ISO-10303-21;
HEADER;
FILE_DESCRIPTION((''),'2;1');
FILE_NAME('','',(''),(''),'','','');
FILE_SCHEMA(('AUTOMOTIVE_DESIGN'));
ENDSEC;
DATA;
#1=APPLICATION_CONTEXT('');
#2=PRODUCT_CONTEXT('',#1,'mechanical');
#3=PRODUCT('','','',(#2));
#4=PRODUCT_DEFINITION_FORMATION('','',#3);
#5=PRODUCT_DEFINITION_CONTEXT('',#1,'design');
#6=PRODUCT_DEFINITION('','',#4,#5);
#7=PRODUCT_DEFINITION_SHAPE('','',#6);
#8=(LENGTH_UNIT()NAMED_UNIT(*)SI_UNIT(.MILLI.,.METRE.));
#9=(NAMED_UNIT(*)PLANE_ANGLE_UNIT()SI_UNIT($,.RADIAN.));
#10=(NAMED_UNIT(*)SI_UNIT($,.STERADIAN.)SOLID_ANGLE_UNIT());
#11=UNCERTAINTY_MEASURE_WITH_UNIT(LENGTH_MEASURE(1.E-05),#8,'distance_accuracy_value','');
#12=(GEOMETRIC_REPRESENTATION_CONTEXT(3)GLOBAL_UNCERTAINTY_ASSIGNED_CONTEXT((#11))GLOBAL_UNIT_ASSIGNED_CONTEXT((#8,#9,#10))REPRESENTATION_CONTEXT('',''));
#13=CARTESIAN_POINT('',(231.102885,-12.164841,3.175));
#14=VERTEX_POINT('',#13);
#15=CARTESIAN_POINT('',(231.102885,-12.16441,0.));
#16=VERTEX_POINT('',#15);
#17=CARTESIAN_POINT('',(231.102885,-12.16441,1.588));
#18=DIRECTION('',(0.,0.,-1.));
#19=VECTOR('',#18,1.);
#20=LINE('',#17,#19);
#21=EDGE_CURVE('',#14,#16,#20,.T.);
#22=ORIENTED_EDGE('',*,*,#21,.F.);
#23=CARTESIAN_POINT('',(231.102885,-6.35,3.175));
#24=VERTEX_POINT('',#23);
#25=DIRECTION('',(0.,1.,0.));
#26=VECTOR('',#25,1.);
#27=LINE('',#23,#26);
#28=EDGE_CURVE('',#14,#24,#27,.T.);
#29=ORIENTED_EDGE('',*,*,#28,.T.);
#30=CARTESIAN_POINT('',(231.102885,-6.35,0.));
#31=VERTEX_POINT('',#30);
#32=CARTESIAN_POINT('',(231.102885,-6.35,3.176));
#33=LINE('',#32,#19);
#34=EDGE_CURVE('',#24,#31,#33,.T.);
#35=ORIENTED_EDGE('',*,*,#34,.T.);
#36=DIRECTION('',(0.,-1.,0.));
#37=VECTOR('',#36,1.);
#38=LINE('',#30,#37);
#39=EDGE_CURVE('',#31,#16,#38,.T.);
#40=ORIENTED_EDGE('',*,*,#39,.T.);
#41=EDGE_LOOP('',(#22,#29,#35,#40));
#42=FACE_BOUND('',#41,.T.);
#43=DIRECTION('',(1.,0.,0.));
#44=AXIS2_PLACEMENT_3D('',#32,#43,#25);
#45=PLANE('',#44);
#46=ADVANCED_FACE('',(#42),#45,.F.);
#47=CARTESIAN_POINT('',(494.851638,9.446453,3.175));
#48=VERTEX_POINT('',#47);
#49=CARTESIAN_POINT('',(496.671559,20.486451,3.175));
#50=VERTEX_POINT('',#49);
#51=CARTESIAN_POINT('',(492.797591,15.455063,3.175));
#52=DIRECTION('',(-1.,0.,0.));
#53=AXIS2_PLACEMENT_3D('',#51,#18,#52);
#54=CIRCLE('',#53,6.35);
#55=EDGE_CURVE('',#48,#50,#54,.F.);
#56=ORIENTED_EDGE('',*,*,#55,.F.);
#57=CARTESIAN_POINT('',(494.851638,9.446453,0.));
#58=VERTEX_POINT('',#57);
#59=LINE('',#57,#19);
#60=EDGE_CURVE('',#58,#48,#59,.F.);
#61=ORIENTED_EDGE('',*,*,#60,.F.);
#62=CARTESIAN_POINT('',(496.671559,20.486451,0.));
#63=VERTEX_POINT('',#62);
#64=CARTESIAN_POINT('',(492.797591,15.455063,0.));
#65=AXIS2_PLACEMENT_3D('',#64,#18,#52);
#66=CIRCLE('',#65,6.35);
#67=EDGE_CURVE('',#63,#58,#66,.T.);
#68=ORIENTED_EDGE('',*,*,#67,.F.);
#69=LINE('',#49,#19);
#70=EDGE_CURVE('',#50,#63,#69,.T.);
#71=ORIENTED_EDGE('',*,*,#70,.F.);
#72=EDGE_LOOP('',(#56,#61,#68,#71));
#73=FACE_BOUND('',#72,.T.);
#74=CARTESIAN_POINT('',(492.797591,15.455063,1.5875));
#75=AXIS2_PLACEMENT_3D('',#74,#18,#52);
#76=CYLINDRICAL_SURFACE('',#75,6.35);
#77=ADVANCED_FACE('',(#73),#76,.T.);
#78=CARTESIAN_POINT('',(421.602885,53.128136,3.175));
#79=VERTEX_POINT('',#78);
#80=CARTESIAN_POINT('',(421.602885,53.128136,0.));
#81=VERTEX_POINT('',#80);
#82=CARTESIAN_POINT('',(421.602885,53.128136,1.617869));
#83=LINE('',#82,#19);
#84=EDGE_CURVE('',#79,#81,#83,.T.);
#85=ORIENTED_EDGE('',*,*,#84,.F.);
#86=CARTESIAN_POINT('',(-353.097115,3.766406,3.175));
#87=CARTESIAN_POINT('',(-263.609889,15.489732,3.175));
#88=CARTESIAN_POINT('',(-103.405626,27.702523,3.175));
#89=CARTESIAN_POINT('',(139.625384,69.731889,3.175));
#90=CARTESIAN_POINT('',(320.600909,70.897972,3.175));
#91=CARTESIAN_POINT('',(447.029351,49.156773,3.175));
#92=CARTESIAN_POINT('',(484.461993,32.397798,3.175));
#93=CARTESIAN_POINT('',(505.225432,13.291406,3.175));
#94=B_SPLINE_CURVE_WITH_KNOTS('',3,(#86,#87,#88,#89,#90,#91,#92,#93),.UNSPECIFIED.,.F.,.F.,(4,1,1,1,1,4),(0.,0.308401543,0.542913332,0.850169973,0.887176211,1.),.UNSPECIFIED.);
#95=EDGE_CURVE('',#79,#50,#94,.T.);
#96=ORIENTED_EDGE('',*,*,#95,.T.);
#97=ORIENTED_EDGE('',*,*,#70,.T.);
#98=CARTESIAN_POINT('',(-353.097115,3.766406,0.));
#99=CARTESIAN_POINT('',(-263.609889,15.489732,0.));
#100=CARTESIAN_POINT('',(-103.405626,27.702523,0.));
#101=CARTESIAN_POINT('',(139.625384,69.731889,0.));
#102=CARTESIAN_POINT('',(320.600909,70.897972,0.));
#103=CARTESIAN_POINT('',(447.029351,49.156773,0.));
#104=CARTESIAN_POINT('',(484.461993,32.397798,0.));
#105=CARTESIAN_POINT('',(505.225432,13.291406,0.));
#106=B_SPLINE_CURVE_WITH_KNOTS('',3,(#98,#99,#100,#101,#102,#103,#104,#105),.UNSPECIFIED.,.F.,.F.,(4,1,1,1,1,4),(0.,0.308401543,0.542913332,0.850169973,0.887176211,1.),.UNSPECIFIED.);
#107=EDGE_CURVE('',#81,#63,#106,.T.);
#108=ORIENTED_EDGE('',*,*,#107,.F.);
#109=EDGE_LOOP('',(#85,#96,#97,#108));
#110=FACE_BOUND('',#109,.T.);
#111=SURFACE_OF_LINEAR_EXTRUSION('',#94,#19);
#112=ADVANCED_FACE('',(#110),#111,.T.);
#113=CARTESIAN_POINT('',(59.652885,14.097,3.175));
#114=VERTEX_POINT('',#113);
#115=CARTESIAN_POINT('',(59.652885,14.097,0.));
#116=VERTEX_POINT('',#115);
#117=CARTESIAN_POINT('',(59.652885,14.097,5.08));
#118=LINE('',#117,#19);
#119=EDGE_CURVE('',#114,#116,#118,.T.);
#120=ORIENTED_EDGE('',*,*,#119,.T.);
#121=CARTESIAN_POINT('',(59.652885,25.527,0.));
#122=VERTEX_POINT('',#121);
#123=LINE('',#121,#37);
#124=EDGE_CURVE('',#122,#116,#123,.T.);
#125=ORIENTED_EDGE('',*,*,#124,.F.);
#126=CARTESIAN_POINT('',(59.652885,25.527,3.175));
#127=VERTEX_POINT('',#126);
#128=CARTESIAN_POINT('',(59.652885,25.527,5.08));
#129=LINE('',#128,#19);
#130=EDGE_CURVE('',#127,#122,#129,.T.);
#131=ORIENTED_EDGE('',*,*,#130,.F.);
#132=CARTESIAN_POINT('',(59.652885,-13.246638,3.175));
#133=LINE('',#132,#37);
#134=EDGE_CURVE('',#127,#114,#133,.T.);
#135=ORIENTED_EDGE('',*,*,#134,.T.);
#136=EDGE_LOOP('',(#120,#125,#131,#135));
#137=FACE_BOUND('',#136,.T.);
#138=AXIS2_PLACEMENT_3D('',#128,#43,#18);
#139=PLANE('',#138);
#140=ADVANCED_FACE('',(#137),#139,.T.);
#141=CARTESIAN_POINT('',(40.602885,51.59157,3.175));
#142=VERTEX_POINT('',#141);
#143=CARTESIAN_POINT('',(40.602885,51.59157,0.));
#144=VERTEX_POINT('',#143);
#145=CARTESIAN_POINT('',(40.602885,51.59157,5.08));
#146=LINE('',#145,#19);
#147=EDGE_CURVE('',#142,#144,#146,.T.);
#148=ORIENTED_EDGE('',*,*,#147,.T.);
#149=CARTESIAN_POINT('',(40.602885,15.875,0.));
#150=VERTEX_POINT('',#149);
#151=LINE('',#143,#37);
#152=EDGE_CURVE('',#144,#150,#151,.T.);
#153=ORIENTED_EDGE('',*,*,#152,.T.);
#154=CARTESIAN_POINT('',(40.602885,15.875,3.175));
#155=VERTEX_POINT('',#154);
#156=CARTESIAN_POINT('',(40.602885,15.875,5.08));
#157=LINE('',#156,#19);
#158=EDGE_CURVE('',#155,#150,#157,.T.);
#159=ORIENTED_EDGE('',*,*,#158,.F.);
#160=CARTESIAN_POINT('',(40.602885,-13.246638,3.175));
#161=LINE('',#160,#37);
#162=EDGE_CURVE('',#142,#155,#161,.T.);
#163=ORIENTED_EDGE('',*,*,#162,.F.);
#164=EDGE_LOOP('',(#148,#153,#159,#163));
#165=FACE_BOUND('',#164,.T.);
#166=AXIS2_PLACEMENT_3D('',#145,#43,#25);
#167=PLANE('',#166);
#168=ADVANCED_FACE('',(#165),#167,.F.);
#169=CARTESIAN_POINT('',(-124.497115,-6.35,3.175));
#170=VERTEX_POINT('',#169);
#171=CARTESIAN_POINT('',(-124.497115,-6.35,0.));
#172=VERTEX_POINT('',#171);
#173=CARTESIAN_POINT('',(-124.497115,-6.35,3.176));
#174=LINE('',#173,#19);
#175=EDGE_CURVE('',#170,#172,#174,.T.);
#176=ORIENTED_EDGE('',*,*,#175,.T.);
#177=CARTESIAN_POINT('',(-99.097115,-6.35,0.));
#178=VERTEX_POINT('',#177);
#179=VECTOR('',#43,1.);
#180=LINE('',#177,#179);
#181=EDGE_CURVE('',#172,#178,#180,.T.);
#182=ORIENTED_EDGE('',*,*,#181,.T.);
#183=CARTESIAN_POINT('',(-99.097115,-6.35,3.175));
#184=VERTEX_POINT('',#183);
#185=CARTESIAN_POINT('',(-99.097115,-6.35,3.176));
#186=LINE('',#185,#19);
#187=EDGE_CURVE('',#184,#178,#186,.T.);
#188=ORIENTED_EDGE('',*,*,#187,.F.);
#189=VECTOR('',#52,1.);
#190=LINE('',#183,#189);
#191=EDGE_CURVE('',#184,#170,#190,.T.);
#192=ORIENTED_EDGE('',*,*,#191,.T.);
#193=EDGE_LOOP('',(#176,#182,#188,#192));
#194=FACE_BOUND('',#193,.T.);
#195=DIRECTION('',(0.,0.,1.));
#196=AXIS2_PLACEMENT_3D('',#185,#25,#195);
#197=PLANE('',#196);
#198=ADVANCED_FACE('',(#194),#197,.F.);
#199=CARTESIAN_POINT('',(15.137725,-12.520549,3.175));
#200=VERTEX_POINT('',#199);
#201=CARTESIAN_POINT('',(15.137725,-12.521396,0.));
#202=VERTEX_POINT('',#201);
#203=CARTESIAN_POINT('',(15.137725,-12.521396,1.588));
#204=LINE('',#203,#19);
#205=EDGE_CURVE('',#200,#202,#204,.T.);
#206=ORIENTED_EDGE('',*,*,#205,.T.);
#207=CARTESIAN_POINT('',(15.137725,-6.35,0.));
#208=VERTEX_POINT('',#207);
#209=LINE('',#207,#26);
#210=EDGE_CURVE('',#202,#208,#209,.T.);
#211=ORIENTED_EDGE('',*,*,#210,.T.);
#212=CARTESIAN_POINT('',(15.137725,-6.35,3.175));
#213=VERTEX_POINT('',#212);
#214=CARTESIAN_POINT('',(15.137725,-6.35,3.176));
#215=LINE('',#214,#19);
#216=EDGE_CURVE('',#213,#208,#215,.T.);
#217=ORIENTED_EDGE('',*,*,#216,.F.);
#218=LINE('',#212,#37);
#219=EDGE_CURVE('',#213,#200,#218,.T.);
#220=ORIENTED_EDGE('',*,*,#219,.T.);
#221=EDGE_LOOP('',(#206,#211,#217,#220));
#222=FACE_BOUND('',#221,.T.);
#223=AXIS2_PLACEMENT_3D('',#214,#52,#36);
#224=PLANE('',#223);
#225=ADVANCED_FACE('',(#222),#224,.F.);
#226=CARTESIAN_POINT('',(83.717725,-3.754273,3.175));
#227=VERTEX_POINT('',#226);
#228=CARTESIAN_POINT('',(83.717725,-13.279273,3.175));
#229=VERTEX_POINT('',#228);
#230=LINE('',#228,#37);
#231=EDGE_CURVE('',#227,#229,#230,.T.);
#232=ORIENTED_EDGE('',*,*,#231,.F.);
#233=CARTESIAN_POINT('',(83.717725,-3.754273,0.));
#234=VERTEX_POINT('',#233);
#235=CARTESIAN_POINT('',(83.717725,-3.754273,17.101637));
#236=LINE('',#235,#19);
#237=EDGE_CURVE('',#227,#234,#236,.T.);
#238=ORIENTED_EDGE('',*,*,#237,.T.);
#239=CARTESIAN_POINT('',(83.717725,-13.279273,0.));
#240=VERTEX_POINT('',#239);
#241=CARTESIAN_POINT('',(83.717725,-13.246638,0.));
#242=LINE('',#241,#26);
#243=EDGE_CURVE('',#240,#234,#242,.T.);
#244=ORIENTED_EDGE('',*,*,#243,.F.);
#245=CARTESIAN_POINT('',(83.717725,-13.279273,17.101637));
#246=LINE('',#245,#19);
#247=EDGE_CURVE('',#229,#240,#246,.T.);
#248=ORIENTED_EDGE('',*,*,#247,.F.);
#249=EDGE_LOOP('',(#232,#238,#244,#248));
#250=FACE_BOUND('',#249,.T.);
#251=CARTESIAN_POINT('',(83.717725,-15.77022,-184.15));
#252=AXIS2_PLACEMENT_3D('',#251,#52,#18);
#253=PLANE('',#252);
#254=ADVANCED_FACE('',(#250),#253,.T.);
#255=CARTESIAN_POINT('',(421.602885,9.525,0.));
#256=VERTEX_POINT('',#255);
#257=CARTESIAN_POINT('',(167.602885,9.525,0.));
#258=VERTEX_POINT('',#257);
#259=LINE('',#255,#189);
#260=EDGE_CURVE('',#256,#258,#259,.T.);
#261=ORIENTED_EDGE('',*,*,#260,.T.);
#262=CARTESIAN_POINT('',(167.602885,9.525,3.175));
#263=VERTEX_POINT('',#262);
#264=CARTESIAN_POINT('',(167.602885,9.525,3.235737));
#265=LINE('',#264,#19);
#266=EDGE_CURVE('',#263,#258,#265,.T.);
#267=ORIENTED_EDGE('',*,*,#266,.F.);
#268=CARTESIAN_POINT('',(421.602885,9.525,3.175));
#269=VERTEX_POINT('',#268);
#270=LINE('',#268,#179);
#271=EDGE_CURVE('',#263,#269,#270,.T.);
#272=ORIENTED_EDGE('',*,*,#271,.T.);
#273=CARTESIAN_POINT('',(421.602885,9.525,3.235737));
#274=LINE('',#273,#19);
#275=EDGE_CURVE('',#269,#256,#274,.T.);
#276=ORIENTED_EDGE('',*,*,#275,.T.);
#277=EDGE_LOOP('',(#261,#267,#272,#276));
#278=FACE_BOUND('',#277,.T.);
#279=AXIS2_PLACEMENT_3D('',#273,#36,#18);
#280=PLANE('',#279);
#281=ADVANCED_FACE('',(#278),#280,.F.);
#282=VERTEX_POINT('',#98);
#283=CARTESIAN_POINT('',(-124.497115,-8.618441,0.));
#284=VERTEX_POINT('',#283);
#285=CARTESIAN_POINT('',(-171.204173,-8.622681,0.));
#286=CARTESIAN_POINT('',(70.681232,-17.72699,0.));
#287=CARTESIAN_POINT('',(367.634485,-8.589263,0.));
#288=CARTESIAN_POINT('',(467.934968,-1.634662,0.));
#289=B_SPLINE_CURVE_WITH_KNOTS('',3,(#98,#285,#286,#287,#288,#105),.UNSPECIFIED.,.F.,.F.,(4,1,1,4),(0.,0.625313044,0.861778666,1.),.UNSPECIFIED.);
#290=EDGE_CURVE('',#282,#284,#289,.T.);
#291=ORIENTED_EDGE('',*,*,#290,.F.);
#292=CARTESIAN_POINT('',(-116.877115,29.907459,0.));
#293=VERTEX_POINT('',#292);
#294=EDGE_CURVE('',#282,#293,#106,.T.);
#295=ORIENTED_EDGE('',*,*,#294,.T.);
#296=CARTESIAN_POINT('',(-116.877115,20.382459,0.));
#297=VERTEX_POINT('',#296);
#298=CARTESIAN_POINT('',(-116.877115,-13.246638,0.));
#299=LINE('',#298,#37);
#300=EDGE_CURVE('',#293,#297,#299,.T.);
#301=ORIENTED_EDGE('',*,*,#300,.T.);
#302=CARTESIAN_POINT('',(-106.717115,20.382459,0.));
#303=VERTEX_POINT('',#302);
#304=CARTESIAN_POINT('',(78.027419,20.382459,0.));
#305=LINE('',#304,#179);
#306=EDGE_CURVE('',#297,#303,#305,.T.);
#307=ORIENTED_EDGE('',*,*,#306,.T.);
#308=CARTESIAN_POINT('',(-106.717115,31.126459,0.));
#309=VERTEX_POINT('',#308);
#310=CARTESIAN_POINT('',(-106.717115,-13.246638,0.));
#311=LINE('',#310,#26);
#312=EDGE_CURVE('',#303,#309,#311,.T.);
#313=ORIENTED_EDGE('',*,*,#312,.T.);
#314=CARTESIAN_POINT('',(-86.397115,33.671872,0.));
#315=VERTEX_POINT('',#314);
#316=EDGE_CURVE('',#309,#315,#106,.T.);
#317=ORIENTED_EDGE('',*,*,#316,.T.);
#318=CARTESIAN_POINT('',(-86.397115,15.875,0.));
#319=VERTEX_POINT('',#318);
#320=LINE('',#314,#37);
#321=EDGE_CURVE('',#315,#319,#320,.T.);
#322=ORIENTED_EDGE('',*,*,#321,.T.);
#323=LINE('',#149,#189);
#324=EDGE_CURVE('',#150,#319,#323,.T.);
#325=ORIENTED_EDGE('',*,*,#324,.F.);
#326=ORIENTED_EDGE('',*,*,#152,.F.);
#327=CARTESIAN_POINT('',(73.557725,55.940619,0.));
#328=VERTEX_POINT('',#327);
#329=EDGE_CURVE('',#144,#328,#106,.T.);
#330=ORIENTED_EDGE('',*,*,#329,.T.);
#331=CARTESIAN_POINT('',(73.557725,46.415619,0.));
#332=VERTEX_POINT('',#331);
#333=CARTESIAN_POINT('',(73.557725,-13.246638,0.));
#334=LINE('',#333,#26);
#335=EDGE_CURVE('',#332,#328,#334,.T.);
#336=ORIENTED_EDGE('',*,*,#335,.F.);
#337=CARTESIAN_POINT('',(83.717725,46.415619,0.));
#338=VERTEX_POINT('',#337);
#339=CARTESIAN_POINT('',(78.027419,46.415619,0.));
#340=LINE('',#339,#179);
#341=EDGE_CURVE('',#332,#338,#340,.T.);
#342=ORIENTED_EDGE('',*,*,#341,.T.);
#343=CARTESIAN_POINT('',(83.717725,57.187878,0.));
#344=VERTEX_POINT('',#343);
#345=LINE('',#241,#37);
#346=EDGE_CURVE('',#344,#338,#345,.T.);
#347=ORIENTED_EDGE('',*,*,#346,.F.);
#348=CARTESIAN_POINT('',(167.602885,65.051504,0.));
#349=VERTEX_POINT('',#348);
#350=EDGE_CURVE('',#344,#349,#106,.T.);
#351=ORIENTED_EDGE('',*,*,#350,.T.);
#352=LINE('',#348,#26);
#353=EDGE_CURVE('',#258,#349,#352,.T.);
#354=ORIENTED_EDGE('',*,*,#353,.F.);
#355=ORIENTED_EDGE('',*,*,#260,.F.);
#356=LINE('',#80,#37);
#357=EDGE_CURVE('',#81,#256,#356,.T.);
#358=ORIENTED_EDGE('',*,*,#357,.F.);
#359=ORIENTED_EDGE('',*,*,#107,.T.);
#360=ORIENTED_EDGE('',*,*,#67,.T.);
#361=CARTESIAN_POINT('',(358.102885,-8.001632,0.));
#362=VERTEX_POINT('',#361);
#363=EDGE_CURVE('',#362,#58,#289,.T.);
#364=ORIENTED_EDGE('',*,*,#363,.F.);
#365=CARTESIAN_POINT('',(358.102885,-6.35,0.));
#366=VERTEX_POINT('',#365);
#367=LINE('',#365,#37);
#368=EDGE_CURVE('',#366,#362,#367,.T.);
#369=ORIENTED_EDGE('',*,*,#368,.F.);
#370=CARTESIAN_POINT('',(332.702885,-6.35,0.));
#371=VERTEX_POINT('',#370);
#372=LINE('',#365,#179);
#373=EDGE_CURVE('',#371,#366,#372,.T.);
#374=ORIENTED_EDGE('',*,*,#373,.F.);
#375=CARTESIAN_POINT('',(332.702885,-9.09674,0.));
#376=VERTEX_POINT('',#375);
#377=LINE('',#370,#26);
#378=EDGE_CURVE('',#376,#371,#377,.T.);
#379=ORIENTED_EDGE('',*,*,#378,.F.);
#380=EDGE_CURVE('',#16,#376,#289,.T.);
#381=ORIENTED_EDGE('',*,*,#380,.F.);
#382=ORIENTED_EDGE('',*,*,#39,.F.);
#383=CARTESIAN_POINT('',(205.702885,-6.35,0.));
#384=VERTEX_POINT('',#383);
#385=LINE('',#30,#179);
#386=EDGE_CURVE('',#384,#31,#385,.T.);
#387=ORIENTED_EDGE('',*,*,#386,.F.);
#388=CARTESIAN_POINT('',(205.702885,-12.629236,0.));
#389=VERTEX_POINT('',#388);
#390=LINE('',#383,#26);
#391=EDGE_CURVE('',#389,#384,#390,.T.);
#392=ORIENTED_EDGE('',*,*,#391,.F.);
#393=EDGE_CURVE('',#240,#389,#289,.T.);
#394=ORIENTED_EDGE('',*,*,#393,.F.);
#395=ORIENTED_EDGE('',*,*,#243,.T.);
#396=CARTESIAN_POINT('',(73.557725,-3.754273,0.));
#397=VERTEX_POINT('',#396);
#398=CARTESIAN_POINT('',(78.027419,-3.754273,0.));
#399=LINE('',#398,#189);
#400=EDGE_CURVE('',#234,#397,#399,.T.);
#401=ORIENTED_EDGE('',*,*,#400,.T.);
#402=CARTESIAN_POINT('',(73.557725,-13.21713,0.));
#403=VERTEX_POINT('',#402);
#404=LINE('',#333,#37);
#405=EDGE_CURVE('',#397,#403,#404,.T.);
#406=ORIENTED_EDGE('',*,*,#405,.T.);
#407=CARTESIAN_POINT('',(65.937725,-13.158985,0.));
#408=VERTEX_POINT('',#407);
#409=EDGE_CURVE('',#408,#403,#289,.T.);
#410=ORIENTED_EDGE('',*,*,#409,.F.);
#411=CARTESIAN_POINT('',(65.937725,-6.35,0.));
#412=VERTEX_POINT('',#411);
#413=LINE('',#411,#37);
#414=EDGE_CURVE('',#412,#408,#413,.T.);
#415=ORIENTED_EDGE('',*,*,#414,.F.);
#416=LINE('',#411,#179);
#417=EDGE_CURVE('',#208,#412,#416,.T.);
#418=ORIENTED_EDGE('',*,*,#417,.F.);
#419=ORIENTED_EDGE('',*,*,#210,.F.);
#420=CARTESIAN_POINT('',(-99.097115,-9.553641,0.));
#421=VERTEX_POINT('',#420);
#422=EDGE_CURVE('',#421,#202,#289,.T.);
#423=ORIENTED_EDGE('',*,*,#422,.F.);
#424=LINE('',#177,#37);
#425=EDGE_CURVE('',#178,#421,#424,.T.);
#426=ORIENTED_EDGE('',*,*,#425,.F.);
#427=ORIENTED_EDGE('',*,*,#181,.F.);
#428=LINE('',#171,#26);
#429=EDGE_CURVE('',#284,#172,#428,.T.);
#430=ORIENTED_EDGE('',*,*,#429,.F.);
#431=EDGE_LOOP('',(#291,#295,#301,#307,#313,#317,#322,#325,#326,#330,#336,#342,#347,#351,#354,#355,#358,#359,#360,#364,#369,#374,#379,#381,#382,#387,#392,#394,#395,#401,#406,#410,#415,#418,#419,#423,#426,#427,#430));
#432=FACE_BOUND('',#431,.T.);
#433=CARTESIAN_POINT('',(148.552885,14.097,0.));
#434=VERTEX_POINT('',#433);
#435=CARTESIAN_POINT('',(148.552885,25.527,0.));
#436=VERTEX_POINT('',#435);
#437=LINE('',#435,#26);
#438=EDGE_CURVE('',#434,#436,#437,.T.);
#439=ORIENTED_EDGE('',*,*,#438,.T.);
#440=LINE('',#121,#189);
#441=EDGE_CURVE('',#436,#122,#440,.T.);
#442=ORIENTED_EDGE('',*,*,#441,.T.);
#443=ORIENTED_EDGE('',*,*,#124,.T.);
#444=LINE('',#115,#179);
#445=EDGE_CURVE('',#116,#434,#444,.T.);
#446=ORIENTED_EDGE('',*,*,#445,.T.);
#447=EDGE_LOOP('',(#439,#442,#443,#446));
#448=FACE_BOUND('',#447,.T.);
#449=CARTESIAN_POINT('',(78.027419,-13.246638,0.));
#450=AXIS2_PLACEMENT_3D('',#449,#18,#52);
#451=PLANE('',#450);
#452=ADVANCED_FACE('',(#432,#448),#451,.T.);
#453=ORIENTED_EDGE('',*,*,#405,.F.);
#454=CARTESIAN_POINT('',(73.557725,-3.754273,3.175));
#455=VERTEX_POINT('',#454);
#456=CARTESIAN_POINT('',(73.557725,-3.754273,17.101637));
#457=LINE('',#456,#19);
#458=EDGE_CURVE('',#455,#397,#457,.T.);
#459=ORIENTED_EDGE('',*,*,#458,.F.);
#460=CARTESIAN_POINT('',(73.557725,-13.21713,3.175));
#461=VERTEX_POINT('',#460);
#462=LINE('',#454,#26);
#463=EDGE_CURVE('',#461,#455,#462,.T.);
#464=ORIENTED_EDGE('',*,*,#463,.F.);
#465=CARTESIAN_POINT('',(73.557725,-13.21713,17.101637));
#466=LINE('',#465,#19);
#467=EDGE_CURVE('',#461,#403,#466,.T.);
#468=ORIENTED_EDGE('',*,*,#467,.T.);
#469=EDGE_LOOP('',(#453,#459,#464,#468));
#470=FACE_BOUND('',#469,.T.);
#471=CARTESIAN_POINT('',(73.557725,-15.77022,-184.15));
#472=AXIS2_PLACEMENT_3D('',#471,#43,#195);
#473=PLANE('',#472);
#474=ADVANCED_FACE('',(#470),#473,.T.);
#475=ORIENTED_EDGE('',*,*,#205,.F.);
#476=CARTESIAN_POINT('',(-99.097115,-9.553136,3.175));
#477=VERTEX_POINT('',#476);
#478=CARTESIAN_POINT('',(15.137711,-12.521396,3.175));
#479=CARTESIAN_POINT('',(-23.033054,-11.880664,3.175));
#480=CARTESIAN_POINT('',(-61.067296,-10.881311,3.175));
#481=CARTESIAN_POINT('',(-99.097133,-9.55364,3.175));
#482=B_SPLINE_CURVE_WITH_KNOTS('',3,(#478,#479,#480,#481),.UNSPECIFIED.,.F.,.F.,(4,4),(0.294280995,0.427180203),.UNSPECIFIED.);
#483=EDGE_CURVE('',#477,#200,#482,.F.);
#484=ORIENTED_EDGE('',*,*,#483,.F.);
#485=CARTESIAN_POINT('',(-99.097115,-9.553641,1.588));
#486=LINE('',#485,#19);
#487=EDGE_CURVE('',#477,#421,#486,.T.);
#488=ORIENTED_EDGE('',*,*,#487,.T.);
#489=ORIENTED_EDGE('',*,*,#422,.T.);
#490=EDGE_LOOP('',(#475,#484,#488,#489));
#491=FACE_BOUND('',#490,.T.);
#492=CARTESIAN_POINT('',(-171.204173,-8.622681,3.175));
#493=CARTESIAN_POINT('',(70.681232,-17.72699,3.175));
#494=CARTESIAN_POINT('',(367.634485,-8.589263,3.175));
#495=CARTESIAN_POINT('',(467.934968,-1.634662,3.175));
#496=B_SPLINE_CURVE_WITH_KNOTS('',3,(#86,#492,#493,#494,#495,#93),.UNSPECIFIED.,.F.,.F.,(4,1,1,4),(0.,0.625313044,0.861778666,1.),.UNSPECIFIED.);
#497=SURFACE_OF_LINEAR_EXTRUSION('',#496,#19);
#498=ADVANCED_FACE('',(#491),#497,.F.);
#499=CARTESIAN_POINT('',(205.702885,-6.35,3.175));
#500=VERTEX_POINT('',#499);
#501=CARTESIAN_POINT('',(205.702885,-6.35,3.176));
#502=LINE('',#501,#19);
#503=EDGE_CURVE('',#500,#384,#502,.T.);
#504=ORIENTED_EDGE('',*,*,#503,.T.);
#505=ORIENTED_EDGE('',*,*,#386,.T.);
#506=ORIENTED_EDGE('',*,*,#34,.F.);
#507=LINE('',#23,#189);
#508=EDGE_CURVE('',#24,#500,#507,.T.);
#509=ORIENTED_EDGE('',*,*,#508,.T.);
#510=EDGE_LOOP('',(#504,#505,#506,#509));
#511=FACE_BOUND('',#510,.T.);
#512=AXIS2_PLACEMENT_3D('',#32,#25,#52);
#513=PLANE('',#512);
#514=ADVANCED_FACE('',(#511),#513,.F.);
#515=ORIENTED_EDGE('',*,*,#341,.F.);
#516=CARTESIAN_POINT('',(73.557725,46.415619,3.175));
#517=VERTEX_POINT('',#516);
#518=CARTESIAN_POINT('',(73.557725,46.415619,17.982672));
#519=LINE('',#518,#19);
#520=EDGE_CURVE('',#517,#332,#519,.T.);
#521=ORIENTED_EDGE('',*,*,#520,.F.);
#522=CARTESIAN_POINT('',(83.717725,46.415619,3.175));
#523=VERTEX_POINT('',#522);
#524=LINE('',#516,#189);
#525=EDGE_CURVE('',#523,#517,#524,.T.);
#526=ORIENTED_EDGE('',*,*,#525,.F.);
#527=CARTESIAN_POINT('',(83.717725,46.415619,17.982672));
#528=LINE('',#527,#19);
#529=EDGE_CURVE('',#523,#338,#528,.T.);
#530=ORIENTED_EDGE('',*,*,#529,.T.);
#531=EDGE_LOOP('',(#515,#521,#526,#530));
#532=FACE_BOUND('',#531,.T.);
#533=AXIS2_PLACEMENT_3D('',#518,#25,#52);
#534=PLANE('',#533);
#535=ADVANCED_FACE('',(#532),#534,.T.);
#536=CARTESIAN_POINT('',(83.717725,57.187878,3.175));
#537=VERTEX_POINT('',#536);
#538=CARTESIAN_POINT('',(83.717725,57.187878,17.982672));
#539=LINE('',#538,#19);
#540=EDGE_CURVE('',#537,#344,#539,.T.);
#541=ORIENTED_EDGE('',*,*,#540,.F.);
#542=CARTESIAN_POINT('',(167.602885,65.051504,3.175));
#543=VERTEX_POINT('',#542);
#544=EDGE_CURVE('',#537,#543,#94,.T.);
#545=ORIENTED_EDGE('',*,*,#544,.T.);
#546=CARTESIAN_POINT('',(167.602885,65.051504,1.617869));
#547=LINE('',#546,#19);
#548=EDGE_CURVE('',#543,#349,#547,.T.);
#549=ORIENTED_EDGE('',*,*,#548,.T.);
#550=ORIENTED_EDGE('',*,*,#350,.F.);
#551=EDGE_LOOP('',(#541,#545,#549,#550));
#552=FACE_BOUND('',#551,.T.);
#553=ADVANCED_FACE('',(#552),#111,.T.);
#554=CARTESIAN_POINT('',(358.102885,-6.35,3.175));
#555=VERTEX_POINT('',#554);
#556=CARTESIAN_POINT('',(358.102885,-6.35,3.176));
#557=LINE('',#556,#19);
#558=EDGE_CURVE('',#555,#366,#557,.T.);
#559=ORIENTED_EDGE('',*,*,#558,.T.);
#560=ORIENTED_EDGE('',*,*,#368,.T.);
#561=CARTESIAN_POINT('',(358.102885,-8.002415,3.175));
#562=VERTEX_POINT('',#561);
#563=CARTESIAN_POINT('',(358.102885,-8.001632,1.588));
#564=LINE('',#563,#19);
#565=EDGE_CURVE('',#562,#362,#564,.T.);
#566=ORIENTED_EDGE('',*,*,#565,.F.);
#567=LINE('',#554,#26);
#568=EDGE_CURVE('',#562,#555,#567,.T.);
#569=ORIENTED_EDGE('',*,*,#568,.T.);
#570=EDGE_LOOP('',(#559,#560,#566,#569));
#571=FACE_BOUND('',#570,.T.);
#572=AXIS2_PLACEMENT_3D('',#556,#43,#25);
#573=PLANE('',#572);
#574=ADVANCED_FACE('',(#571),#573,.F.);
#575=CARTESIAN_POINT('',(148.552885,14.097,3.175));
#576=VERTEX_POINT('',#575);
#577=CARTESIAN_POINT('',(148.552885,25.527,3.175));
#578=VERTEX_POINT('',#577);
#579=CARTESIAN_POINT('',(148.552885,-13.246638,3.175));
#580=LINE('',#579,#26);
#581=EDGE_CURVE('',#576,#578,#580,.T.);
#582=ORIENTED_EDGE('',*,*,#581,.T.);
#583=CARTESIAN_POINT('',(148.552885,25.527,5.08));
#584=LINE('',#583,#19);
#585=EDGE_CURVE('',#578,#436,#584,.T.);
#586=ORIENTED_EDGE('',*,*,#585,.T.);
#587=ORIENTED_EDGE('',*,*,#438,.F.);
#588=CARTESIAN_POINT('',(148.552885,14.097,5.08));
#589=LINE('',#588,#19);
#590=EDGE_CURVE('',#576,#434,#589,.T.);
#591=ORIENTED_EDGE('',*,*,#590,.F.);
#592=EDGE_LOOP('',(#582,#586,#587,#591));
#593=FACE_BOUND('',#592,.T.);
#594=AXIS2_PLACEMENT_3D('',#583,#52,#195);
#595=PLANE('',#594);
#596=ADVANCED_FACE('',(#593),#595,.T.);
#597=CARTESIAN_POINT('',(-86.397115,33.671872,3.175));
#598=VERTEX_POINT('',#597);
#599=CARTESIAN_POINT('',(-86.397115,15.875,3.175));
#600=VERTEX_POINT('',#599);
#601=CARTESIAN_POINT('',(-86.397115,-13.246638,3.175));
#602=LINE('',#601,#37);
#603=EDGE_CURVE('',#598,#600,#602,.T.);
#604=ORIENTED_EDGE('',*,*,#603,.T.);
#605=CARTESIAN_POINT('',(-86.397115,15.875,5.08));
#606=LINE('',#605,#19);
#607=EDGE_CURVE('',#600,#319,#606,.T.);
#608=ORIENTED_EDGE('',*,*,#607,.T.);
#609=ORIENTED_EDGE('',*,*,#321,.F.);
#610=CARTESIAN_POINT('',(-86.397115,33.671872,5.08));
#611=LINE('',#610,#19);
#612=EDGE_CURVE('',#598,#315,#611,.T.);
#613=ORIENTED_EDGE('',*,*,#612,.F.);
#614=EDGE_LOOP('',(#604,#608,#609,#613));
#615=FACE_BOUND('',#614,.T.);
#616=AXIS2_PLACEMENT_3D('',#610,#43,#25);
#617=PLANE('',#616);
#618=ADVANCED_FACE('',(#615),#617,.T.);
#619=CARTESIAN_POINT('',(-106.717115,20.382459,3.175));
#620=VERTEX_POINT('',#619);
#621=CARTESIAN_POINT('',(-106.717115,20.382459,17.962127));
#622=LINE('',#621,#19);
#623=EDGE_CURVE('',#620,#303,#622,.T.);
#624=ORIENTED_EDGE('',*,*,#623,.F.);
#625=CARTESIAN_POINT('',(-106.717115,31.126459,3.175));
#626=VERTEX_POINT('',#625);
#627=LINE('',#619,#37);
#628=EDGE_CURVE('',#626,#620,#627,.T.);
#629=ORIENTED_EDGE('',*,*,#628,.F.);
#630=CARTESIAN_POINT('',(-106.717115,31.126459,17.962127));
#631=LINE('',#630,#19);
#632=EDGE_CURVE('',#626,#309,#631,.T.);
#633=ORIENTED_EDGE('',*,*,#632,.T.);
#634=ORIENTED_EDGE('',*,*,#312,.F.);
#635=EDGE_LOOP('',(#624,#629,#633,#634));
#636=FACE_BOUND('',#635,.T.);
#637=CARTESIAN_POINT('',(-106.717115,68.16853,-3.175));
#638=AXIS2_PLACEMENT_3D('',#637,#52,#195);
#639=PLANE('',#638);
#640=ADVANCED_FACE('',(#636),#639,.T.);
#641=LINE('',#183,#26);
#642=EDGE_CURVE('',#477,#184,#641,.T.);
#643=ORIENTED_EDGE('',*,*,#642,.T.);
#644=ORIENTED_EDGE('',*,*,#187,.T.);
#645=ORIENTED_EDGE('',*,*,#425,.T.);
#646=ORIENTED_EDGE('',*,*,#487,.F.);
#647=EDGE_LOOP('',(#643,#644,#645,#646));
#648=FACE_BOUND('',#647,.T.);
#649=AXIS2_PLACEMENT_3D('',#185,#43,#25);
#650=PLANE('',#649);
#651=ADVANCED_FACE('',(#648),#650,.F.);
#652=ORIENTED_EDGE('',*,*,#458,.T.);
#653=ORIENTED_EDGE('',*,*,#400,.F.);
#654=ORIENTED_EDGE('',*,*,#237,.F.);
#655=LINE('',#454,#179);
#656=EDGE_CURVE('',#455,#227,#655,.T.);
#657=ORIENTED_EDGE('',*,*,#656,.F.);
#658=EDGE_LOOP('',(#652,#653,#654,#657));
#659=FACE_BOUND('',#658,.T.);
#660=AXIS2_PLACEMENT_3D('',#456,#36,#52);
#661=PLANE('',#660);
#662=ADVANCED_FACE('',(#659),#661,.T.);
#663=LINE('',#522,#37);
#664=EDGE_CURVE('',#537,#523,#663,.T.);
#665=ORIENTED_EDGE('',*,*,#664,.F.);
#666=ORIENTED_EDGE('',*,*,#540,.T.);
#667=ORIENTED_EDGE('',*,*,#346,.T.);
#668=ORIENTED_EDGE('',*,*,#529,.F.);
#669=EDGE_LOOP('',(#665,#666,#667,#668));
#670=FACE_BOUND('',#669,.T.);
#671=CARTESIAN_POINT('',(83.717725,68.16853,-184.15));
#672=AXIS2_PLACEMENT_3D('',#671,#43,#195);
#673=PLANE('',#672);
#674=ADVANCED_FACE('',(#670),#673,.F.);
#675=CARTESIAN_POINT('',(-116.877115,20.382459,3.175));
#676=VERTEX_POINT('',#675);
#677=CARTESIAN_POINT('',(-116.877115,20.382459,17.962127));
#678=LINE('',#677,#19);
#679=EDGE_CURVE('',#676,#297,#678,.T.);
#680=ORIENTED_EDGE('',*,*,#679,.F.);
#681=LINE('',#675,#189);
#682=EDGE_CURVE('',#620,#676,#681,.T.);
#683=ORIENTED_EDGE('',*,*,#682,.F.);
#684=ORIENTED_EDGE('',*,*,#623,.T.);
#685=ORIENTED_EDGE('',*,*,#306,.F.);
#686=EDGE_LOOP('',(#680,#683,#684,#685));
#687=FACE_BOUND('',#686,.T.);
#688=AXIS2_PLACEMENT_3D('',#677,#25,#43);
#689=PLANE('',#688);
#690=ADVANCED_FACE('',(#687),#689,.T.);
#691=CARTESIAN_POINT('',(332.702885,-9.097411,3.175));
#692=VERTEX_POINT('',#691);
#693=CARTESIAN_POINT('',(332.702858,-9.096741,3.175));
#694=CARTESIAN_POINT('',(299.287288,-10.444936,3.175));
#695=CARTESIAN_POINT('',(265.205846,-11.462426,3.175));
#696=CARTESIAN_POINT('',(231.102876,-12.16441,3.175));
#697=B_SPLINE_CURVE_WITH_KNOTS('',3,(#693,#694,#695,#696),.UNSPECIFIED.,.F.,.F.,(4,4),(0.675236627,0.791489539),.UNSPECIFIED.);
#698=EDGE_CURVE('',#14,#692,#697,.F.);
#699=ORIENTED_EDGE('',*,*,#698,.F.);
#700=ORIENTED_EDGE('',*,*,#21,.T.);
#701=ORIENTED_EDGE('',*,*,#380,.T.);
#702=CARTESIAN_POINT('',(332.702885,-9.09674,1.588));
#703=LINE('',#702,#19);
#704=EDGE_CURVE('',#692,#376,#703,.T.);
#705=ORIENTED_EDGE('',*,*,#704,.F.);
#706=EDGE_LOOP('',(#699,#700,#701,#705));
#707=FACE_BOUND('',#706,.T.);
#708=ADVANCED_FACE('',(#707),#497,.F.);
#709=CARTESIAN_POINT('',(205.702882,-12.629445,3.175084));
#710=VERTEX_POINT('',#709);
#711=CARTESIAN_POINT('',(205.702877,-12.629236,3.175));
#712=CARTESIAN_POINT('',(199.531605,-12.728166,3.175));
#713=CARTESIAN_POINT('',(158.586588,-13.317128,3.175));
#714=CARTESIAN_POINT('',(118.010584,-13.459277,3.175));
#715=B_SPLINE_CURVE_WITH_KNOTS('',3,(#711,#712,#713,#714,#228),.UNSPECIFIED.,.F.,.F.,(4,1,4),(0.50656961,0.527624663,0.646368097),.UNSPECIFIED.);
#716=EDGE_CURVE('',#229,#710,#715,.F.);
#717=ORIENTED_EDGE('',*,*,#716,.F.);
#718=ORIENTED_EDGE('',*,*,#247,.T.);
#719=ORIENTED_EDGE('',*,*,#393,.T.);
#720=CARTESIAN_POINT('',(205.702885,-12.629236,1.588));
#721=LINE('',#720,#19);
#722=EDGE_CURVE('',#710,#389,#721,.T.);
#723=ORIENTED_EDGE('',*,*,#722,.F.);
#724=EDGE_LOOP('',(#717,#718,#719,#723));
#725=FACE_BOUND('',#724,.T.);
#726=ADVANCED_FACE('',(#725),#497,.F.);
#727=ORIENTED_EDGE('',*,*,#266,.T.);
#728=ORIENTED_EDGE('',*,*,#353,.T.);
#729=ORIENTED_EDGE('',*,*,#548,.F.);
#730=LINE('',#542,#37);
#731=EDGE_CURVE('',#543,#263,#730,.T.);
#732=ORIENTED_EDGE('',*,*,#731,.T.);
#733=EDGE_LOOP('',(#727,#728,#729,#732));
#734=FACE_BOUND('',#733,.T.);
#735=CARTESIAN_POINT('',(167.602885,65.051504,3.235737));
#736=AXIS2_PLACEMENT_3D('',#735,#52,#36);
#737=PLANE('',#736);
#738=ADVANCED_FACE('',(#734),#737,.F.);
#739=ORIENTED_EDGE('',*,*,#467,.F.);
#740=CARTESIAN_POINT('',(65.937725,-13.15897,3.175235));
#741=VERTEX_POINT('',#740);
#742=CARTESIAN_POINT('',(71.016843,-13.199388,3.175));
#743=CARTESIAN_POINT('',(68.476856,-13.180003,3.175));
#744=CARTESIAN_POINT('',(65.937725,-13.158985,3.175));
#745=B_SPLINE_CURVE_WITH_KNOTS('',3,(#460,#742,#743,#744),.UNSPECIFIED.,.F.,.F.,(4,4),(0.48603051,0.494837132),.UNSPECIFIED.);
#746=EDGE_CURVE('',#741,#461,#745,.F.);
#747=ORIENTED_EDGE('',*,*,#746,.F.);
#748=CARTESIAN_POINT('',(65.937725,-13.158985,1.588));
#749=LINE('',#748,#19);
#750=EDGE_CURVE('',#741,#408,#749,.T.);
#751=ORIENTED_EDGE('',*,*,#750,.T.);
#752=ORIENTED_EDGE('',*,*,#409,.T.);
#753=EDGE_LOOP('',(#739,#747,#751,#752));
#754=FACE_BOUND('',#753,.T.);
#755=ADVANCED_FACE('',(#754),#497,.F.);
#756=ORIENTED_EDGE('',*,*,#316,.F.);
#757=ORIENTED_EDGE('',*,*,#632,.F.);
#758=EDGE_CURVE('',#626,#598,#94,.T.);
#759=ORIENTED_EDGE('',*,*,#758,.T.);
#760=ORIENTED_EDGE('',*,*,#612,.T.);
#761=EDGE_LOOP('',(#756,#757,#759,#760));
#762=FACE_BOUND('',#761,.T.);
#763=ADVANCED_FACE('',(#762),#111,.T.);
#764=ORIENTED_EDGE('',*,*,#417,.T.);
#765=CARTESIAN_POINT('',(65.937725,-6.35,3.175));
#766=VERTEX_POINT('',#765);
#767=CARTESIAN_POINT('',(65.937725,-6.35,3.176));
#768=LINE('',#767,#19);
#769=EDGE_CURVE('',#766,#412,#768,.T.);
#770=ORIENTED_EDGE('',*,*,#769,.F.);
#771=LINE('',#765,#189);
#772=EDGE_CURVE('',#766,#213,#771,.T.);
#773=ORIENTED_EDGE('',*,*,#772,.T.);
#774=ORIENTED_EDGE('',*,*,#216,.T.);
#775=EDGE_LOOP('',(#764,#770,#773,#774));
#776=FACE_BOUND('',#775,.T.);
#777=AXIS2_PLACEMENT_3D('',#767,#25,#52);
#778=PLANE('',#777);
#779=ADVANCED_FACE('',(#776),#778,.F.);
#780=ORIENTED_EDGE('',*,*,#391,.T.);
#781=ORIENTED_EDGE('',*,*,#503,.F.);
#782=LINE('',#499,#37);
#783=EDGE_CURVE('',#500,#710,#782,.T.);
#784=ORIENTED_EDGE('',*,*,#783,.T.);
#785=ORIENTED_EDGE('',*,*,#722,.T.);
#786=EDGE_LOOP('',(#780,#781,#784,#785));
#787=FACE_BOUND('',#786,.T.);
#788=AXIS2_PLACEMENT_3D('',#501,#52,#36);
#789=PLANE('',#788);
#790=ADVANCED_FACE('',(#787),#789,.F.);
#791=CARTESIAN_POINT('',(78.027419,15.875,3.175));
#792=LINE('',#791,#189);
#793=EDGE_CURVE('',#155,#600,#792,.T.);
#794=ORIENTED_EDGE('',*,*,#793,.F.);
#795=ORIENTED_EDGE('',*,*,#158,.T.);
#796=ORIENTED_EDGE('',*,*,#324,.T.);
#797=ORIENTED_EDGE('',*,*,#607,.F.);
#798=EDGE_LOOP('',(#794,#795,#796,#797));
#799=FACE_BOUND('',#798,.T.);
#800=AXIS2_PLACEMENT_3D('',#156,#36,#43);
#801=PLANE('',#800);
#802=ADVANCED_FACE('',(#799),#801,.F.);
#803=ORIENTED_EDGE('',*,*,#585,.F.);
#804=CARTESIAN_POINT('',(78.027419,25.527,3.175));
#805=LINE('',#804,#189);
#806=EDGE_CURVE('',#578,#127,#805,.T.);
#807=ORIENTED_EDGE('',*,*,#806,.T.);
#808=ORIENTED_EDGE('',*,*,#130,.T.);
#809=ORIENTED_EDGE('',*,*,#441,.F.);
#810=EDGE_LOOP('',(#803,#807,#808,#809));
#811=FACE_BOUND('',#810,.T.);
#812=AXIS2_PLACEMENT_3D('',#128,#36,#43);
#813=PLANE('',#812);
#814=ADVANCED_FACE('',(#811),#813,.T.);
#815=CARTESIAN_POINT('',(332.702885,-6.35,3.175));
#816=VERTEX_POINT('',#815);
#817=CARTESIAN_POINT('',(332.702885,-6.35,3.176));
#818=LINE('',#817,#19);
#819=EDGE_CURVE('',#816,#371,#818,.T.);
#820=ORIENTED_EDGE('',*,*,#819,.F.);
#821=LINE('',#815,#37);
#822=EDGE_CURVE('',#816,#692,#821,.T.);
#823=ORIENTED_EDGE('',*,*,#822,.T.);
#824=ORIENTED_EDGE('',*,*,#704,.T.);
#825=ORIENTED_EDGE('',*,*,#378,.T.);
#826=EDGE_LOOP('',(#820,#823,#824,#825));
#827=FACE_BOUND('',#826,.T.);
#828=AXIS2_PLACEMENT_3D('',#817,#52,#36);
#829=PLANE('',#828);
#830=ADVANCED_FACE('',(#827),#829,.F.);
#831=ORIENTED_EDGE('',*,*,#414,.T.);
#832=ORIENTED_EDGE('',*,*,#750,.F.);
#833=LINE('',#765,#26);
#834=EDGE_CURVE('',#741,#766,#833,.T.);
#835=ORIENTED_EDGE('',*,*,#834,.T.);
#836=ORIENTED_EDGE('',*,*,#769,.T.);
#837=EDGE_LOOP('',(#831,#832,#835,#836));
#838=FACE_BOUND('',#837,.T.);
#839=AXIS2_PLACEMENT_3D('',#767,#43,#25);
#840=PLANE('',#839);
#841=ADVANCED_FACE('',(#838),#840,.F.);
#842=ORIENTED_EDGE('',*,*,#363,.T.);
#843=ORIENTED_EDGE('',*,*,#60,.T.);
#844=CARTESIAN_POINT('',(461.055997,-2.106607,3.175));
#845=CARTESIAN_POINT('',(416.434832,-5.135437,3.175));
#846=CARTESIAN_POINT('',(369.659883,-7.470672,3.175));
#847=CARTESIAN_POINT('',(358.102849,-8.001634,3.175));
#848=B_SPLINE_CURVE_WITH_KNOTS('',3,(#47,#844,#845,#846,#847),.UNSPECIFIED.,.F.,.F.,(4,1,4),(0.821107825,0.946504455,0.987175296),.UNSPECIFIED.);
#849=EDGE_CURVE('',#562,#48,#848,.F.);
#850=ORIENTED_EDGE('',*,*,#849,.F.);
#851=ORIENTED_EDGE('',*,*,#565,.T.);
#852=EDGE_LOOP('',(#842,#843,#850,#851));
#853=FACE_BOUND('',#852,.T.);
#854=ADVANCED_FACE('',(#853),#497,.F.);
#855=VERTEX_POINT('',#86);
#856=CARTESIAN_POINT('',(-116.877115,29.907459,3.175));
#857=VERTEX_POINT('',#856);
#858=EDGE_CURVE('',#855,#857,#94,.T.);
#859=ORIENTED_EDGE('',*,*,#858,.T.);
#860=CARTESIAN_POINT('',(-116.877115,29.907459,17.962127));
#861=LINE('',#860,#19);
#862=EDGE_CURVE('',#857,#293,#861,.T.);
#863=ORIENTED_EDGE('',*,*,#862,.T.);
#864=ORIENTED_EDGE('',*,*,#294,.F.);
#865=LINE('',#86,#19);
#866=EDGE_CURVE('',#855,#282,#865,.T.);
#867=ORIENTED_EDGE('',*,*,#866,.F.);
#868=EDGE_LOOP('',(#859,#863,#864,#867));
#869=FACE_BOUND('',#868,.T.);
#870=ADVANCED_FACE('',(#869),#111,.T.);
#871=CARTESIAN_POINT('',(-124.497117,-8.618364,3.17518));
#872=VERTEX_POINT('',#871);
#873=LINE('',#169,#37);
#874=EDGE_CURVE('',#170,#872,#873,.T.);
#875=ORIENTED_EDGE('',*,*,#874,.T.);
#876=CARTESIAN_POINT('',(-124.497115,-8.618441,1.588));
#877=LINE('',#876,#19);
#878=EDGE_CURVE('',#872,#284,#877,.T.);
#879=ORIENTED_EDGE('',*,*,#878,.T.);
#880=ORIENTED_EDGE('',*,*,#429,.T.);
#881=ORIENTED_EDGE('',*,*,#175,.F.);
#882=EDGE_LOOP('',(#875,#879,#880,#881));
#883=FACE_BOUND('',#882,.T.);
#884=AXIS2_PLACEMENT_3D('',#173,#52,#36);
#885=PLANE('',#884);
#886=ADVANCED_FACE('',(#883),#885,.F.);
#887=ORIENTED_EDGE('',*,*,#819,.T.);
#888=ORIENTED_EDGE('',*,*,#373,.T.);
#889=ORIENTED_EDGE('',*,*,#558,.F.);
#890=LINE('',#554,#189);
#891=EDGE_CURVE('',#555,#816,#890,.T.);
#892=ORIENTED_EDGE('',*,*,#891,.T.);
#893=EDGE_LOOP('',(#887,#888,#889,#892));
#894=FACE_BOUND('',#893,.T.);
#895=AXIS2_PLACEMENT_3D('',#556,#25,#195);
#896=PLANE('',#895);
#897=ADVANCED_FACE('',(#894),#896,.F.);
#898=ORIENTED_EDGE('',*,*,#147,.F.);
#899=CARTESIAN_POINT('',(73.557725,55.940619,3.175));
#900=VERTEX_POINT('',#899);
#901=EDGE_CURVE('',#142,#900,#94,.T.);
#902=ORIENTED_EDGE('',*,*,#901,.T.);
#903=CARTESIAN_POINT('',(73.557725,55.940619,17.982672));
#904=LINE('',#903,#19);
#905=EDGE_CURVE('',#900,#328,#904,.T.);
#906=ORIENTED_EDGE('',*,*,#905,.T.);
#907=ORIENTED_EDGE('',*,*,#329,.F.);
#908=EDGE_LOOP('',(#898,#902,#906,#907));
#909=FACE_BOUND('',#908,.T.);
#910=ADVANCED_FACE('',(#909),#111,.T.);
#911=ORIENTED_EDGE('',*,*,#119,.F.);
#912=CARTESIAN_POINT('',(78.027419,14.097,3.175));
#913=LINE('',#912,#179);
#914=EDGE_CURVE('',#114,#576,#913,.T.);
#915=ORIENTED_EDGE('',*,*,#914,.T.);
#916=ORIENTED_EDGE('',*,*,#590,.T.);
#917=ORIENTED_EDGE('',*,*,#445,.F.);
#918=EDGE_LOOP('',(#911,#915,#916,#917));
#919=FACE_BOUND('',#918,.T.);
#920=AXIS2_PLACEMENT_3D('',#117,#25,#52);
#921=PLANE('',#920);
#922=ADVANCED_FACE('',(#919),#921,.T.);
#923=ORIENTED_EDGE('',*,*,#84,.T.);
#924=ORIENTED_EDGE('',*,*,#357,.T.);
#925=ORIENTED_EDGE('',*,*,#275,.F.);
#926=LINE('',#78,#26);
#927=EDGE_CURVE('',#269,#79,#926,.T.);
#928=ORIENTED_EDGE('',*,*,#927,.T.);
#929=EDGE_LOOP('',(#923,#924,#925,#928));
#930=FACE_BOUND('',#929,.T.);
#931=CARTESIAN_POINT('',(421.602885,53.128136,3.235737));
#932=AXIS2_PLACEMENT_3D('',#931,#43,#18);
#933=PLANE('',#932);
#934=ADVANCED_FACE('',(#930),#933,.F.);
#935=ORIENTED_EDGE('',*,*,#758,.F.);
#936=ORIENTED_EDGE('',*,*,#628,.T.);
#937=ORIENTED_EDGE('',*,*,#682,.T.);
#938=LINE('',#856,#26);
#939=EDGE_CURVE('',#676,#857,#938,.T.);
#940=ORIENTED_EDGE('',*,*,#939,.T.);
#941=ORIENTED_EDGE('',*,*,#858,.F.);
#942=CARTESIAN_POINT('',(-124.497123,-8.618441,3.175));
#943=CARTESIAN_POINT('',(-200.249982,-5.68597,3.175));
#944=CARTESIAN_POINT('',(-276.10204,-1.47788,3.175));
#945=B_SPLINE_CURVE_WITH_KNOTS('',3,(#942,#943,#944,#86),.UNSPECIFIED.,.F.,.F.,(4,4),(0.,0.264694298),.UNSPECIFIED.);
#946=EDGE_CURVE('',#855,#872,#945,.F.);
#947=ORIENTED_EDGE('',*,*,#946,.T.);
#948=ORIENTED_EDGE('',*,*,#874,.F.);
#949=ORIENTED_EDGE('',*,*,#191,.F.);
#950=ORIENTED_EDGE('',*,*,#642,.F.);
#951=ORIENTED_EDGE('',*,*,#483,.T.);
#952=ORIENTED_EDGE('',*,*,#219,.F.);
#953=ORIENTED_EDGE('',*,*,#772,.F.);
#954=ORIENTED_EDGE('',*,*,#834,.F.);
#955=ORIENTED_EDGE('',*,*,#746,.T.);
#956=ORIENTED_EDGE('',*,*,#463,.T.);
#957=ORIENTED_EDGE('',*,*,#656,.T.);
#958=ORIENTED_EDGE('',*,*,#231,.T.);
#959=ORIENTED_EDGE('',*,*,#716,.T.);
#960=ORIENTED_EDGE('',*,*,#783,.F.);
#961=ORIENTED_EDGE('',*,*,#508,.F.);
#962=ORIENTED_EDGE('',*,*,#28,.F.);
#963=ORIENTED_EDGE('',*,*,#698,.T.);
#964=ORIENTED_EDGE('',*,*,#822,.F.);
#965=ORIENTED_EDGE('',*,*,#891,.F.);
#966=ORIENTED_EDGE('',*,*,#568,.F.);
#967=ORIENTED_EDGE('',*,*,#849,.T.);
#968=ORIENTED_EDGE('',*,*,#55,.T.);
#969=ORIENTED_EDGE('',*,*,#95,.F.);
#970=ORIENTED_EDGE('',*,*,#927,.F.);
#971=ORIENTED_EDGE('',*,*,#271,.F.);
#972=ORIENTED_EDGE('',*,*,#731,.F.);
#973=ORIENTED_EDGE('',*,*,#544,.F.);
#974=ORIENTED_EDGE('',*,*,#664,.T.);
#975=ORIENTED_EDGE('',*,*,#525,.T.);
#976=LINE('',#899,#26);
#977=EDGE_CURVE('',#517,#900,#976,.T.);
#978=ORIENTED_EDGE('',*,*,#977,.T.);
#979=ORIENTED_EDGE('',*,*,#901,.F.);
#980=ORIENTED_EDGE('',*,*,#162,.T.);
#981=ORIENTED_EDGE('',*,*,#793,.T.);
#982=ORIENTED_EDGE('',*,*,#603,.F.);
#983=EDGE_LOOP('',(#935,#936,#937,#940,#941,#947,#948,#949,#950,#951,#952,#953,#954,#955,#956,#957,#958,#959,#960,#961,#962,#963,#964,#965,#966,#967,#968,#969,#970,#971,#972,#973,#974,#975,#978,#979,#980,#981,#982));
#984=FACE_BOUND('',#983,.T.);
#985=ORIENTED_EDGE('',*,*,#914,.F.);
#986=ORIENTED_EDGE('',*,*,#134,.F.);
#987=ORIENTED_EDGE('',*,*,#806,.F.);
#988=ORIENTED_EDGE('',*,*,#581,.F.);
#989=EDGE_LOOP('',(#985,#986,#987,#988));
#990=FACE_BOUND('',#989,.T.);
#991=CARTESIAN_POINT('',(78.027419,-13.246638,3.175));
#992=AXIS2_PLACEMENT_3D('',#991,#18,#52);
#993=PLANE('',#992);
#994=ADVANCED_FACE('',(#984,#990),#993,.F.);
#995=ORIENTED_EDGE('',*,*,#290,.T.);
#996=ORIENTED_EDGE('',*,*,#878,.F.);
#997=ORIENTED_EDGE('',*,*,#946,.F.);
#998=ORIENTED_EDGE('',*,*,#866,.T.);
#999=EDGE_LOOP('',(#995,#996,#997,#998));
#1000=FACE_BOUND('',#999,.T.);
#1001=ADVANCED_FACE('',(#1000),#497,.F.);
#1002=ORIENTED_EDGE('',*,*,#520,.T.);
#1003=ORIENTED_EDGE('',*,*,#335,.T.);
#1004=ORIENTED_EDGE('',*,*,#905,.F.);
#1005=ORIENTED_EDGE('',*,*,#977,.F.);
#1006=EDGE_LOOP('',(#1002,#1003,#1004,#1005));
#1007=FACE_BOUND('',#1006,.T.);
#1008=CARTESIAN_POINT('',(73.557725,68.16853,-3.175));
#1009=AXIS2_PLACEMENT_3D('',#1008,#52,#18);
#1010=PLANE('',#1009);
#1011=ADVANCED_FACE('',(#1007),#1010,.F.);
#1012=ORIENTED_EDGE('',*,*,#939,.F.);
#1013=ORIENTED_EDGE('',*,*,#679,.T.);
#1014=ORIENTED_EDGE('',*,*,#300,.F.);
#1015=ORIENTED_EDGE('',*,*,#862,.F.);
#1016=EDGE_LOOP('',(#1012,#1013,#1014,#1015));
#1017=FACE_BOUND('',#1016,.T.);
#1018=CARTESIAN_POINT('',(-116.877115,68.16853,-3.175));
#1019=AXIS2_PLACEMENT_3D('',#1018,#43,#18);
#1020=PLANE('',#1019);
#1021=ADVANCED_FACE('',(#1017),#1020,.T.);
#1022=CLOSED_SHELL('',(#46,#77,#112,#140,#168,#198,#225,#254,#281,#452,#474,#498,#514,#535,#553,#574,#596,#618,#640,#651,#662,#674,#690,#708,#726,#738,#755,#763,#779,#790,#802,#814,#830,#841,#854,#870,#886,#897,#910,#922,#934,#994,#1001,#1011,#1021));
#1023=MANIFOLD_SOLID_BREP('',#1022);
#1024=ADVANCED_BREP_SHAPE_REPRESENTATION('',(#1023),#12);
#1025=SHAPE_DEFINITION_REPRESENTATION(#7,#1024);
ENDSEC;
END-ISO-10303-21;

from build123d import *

# Parameters (mm, degrees)
BOSS_EXTRUDE1_DEPTH   = 3.175
FILLET1_R             = 6.35
CUT_EXTRUDE5_REACH    = 505.743
SKETCH5_W             = 88.9
SKETCH5_H             = 11.43
CUT_EXTRUDE3_DEPTH    = 5.08
CUT_EXTRUDE6_REACH    = 505.743
CUT_EXTRUDE4_DEPTH    = 5.08
CAVITY1_START         = -116.877115344
CAVITY1_OUTLINE_W     = 26.033160117
CAVITY1_OUTLINE_H     = 6
CAVITY1_DEPTH         = 10.16
CAVITY1_START_2       = 73.557724966
CAVITY1_2_OUTLINE_W   = 11.245727141
CAVITY1_2_OUTLINE_H   = 6
CAVITY1_2_OUTLINE_W_2 = 12.584380536
CAVITY1_2_DEPTH       = 10.16


# Read off the part's stored shape, not the designer's step: Cavity1
with BuildPart() as part:
    # Sketch1 → Boss-Extrude1 (new body)
    with BuildSketch(Plane.XY):
        with BuildLine():
            add(Edge.make_bspline(
                [(-353.097115344, 3.76640622), (-263.60988857, 15.489732087), (-103.405625954, 27.702523148), (139.625383809, 69.731889132), (320.600909148, 70.897971745), (447.029350736, 49.156772515), (484.461992977, 32.39779841), (505.225432444, 13.29140622)],
                knots=[0, 0, 0, 0, 0.308401543, 0.542913332, 0.850169973, 0.887176211, 1, 1, 1, 1], degree=3))
            add(Edge.make_bspline(
                [(-353.097115344, 3.76640622), (-171.204173065, -8.622681299), (70.681231732, -17.726989966), (367.634485174, -8.589262826), (467.934967897, -1.634661846), (505.225432444, 13.29140622)],
                knots=[0, 0, 0, 0, 0.625313044, 0.861778666, 1, 1, 1, 1], degree=3))
        make_face()
    extrude(amount=BOSS_EXTRUDE1_DEPTH)

    # Fillet1
    fillet1_edges = [part.edges().sort_by_distance(p)[0] for p in [
        (505.225432444, 13.29140622, 1.5875),
    ]]
    fillet(fillet1_edges, radius=FILLET1_R)

    # Sketch7 → Cut-Extrude5 (cut, up to next)
    with BuildSketch(Plane(origin=(0, 0, 0), x_dir=(-1, 0, 0), z_dir=(0, 0, -1)), mode=Mode.PRIVATE) as cut_extrude5_sk1:
        with BuildLine():
            Line((-358.102884656, -6.35), (-332.702884656, -6.35))
            Line((-332.702884656, -6.35), (-332.702884656, -9.096739879))
            add(Edge.make_bspline(
                [(-332.702884656, -9.096739879), (-341.216325131, -8.753253809), (-349.686543734, -8.388301604), (-358.102884656, -8.001631902)],
                knots=[0.79148957, 0.79148957, 0.79148957, 0.79148957, 0.821107867, 0.821107867, 0.821107867, 0.821107867], degree=3))
            Line((-358.102884656, -8.001631902), (-358.102884656, -6.35))
        make_face()
    cut_extrude5_tool1 = extrude(cut_extrude5_sk1.sketch, amount=-CUT_EXTRUDE5_REACH, mode=Mode.PRIVATE) & part.part
    # Sketch7 → Cut-Extrude5 (cut, up to next)
    with BuildSketch(Plane(origin=(0, 0, 0), x_dir=(-1, 0, 0), z_dir=(0, 0, -1)), mode=Mode.PRIVATE) as cut_extrude5_sk2:
        with BuildLine():
            Line((-231.102884656, -6.35), (-205.702884656, -6.35))
            Line((-205.702884656, -6.35), (-205.702884656, -12.629236372))
            add(Edge.make_bspline(
                [(-205.702884656, -12.629236372), (-214.16430095, -12.49359489), (-222.634256581, -12.338730353), (-231.102884656, -12.164410009)],
                knots=[0.646368105, 0.646368105, 0.646368105, 0.646368105, 0.675236637, 0.675236637, 0.675236637, 0.675236637], degree=3))
            Line((-231.102884656, -12.164410009), (-231.102884656, -6.35))
        make_face()
    cut_extrude5_tool2 = extrude(cut_extrude5_sk2.sketch, amount=-CUT_EXTRUDE5_REACH, mode=Mode.PRIVATE) & part.part
    # Sketch7 → Cut-Extrude5 (cut, up to next)
    with BuildSketch(Plane(origin=(0, 0, 0), x_dir=(-1, 0, 0), z_dir=(0, 0, -1)), mode=Mode.PRIVATE) as cut_extrude5_sk3:
        with BuildLine():
            Line((-65.93772502, -6.35), (-15.13772502, -6.35))
            Line((-15.13772502, -6.35), (-15.13772502, -12.521395898))
            add(Edge.make_bspline(
                [(-15.13772502, -12.521395898), (-32.040463908, -12.805124192), (-48.969973263, -13.018530998), (-65.93772502, -13.158984983)],
                knots=[0.427180219, 0.427180219, 0.427180219, 0.427180219, 0.48603051, 0.48603051, 0.48603051, 0.48603051], degree=3))
            Line((-65.93772502, -13.158984983), (-65.93772502, -6.35))
        make_face()
    cut_extrude5_tool3 = extrude(cut_extrude5_sk3.sketch, amount=-CUT_EXTRUDE5_REACH, mode=Mode.PRIVATE) & part.part
    # Sketch7 → Cut-Extrude5 (cut, up to next)
    with BuildSketch(Plane(origin=(0, 0, 0), x_dir=(-1, 0, 0), z_dir=(0, 0, -1)), mode=Mode.PRIVATE) as cut_extrude5_sk4:
        with BuildLine():
            Line((99.097115344, -6.35), (124.497115344, -6.35))
            Line((124.497115344, -6.35), (124.497115344, -8.618440951))
            add(Edge.make_bspline(
                [(124.497115344, -8.618440951), (116.029695194, -8.946223445), (107.563514441, -9.25806826), (99.097115344, -9.553641032)],
                knots=[0.264694306, 0.264694306, 0.264694306, 0.264694306, 0.294281016, 0.294281016, 0.294281016, 0.294281016], degree=3))
            Line((99.097115344, -9.553641032), (99.097115344, -6.35))
        make_face()
    cut_extrude5_tool4 = extrude(cut_extrude5_sk4.sketch, amount=-CUT_EXTRUDE5_REACH, mode=Mode.PRIVATE) & part.part
    add(cut_extrude5_tool1.solids().sort_by_distance((344.35466, -7.478114, 0))[0], mode=Mode.SUBTRACT)
    add(cut_extrude5_tool2.solids().sort_by_distance((218.240446, -9.379718, 0))[0], mode=Mode.SUBTRACT)
    add(cut_extrude5_tool3.solids().sort_by_distance((40.951434, -9.615723, 0))[0], mode=Mode.SUBTRACT)
    add(cut_extrude5_tool4.solids().sort_by_distance((-111.075712, -7.735326, 0))[0], mode=Mode.SUBTRACT)

    # Sketch5 → Cut-Extrude3 (cut)
    with BuildSketch(Plane.XY):
        with Locations((104.102884656, 19.812)):
            Rectangle(SKETCH5_W, SKETCH5_H)
    extrude(amount=CUT_EXTRUDE3_DEPTH, mode=Mode.SUBTRACT)

    # Sketch8 → Cut-Extrude6 (cut, up to next)
    with BuildSketch(Plane(origin=(0, 0, 0), x_dir=(-1, 0, 0), z_dir=(0, 0, -1)), mode=Mode.PRIVATE) as cut_extrude6_sk1:
        with BuildLine():
            Line((-421.602884656, 53.128136288), (-421.602884656, 9.525))
            Line((-421.602884656, 9.525), (-167.602884656, 9.525))
            Line((-167.602884656, 9.525), (-167.602884656, 65.051503813))
            add(Edge.make_bspline(
                [(-167.602884656, 65.051503813), (-244.722722107, 70.03272949), (-333.181087562, 68.488590043), (-412.953469478, 55.01226242), (-421.602884656, 53.128136288)],
                knots=[0.594152543, 0.594152543, 0.594152543, 0.594152543, 0.850169973, 0.88199459, 0.88199459, 0.88199459, 0.88199459], degree=3))
        make_face()
    cut_extrude6_tool1 = extrude(cut_extrude6_sk1.sketch, amount=-CUT_EXTRUDE6_REACH, mode=Mode.PRIVATE) & part.part
    add(cut_extrude6_tool1.solids().sort_by_distance((290.394323, 37.11831, 0))[0], mode=Mode.SUBTRACT)

    # Sketch6 → Cut-Extrude4 (cut)
    with BuildSketch(Plane.XY):
        with BuildLine():
            Line((40.602884656, 51.591569772), (40.602884656, 15.875))
            Line((40.602884656, 15.875), (-86.397115344, 15.875))
            Line((-86.397115344, 15.875), (-86.397115344, 33.671872302))
            add(Edge.make_bspline(
                [(-86.397115344, 33.671872302), (-85.336997309, 33.80875443), (-42.923565209, 39.312219047), (-0.873657075, 45.877823306), (40.602884656, 51.591569772)],
                knots=[0.304745552, 0.304745552, 0.304745552, 0.304745552, 0.308401543, 0.451045815, 0.451045815, 0.451045815, 0.451045815], degree=3))
        make_face()
    extrude(amount=CUT_EXTRUDE4_DEPTH, mode=Mode.SUBTRACT)

    # Cavity1 outline → Cavity1 (cut)
    with BuildSketch(Plane.YZ.offset(CAVITY1_START)):
        with Locations((33.399039406, 2)):
            Rectangle(CAVITY1_OUTLINE_W, CAVITY1_OUTLINE_H)
    extrude(amount=CAVITY1_DEPTH, mode=Mode.SUBTRACT)

    # Cavity1 2 outline → Cavity1 2 (cut)
    with BuildSketch(Plane.YZ.offset(CAVITY1_START_2)):
        with Locations((-9.37713643, 2)):
            Rectangle(CAVITY1_2_OUTLINE_W, CAVITY1_2_OUTLINE_H)
        with Locations((52.707809732, 2)):
            Rectangle(CAVITY1_2_OUTLINE_W_2, CAVITY1_2_OUTLINE_H)
    extrude(amount=CAVITY1_2_DEPTH, mode=Mode.SUBTRACT)


solid = part.part
